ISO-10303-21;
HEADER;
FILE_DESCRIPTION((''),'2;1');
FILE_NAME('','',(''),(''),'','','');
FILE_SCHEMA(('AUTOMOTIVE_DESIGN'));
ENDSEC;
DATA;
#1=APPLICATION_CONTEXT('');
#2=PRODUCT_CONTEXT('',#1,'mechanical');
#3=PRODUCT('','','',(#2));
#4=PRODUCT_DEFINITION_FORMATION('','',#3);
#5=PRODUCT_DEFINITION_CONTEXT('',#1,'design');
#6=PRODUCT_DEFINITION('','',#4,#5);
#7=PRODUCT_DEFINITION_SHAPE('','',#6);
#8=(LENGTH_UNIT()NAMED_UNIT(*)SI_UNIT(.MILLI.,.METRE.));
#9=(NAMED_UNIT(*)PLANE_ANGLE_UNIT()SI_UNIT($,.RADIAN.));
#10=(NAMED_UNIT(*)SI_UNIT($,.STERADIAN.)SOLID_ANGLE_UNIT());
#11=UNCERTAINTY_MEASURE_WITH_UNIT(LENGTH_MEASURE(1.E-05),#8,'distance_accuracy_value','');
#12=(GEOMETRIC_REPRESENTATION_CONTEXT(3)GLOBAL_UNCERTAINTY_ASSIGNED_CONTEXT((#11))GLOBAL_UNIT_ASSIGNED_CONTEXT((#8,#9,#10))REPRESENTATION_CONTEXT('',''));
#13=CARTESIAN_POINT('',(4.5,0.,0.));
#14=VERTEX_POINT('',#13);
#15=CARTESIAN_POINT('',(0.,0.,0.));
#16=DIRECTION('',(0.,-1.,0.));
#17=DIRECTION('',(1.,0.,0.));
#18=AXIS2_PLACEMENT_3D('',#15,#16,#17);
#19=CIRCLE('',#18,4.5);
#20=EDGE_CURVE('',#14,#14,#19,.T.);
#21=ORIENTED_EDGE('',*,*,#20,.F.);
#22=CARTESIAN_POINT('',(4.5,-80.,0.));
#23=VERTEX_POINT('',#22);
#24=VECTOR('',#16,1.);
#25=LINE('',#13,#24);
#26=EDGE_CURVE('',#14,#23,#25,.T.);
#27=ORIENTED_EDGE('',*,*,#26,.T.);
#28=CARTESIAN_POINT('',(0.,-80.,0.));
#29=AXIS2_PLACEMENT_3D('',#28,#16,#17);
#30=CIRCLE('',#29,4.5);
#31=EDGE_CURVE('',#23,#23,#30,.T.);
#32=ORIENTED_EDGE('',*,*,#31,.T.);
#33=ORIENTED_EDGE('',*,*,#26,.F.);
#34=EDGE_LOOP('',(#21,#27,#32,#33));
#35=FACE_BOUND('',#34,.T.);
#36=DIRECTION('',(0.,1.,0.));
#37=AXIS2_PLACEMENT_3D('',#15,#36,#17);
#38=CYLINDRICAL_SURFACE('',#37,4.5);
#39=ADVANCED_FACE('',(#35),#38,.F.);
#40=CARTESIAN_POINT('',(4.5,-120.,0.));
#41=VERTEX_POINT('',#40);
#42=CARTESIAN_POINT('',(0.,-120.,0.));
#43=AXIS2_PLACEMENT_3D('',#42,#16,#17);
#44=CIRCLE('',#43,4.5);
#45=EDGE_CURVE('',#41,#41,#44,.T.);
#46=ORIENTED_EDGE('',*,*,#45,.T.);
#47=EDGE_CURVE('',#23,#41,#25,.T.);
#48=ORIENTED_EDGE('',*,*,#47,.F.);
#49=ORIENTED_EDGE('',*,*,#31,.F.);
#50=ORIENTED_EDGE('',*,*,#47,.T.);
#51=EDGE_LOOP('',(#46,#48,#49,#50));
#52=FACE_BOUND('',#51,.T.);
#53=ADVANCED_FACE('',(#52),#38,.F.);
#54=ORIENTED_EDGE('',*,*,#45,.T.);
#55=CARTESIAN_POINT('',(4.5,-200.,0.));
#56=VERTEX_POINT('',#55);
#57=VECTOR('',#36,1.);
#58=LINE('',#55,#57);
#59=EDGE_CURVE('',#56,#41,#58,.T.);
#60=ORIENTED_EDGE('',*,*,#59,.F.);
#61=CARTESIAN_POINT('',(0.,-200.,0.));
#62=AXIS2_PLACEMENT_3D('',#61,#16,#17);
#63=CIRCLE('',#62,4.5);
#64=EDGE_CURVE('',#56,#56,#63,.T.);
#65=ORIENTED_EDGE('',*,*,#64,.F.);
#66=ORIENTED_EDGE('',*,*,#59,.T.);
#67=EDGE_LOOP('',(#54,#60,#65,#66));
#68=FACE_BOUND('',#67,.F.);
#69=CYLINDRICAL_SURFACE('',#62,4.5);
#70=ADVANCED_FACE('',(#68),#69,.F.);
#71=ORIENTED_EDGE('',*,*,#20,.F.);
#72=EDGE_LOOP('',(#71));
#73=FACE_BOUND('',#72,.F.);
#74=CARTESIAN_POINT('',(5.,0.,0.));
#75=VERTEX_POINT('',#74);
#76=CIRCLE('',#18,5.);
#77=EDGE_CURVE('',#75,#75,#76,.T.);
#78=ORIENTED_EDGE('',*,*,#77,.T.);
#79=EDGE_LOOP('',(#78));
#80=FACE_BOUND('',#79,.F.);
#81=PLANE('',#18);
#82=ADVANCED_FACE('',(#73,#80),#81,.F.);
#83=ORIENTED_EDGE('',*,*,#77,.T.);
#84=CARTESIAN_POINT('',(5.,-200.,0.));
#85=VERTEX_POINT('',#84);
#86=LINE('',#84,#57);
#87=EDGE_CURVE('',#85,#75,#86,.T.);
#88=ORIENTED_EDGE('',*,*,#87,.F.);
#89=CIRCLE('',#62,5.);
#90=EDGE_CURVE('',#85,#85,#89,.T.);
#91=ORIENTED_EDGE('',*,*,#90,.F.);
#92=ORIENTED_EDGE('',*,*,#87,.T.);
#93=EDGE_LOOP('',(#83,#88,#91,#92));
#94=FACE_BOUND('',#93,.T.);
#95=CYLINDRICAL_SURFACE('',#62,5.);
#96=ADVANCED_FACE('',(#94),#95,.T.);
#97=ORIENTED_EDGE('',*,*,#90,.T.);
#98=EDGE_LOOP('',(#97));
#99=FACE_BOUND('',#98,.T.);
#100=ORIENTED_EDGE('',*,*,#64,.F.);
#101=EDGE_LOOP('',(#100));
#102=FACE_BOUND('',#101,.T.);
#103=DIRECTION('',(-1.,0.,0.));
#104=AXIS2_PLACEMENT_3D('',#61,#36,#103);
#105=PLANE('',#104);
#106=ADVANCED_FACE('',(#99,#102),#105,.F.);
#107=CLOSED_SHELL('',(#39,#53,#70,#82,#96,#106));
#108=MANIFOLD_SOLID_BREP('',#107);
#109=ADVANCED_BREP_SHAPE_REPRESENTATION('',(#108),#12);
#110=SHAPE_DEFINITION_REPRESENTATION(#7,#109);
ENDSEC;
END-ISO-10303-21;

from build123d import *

# Parameters (mm, degrees)
F0_R     = 5
F0_R_2   = 4.5
F1_DEPTH = 120


# Not quite as in the source:
# - a pattern or mirror of a feature is missing from the dataset's text; its kind, count and spacing are read off the source's solid


with BuildPart() as f1:
    # F0 (on Front) → F1 (new body)
    with BuildSketch(Plane.XZ):
        Circle(F0_R)
        Circle(F0_R_2, mode=Mode.SUBTRACT)
    extrude(amount=F1_DEPTH)

    # F1_copies: F1 across plane


with BuildPart() as f1_1:
    add(f1.part)
    add(f1.part.mirror(Plane(origin=(0, -100, 0), x_dir=(0, 0, -1), z_dir=(0, -1, 0))))


solid = f1_1.part
